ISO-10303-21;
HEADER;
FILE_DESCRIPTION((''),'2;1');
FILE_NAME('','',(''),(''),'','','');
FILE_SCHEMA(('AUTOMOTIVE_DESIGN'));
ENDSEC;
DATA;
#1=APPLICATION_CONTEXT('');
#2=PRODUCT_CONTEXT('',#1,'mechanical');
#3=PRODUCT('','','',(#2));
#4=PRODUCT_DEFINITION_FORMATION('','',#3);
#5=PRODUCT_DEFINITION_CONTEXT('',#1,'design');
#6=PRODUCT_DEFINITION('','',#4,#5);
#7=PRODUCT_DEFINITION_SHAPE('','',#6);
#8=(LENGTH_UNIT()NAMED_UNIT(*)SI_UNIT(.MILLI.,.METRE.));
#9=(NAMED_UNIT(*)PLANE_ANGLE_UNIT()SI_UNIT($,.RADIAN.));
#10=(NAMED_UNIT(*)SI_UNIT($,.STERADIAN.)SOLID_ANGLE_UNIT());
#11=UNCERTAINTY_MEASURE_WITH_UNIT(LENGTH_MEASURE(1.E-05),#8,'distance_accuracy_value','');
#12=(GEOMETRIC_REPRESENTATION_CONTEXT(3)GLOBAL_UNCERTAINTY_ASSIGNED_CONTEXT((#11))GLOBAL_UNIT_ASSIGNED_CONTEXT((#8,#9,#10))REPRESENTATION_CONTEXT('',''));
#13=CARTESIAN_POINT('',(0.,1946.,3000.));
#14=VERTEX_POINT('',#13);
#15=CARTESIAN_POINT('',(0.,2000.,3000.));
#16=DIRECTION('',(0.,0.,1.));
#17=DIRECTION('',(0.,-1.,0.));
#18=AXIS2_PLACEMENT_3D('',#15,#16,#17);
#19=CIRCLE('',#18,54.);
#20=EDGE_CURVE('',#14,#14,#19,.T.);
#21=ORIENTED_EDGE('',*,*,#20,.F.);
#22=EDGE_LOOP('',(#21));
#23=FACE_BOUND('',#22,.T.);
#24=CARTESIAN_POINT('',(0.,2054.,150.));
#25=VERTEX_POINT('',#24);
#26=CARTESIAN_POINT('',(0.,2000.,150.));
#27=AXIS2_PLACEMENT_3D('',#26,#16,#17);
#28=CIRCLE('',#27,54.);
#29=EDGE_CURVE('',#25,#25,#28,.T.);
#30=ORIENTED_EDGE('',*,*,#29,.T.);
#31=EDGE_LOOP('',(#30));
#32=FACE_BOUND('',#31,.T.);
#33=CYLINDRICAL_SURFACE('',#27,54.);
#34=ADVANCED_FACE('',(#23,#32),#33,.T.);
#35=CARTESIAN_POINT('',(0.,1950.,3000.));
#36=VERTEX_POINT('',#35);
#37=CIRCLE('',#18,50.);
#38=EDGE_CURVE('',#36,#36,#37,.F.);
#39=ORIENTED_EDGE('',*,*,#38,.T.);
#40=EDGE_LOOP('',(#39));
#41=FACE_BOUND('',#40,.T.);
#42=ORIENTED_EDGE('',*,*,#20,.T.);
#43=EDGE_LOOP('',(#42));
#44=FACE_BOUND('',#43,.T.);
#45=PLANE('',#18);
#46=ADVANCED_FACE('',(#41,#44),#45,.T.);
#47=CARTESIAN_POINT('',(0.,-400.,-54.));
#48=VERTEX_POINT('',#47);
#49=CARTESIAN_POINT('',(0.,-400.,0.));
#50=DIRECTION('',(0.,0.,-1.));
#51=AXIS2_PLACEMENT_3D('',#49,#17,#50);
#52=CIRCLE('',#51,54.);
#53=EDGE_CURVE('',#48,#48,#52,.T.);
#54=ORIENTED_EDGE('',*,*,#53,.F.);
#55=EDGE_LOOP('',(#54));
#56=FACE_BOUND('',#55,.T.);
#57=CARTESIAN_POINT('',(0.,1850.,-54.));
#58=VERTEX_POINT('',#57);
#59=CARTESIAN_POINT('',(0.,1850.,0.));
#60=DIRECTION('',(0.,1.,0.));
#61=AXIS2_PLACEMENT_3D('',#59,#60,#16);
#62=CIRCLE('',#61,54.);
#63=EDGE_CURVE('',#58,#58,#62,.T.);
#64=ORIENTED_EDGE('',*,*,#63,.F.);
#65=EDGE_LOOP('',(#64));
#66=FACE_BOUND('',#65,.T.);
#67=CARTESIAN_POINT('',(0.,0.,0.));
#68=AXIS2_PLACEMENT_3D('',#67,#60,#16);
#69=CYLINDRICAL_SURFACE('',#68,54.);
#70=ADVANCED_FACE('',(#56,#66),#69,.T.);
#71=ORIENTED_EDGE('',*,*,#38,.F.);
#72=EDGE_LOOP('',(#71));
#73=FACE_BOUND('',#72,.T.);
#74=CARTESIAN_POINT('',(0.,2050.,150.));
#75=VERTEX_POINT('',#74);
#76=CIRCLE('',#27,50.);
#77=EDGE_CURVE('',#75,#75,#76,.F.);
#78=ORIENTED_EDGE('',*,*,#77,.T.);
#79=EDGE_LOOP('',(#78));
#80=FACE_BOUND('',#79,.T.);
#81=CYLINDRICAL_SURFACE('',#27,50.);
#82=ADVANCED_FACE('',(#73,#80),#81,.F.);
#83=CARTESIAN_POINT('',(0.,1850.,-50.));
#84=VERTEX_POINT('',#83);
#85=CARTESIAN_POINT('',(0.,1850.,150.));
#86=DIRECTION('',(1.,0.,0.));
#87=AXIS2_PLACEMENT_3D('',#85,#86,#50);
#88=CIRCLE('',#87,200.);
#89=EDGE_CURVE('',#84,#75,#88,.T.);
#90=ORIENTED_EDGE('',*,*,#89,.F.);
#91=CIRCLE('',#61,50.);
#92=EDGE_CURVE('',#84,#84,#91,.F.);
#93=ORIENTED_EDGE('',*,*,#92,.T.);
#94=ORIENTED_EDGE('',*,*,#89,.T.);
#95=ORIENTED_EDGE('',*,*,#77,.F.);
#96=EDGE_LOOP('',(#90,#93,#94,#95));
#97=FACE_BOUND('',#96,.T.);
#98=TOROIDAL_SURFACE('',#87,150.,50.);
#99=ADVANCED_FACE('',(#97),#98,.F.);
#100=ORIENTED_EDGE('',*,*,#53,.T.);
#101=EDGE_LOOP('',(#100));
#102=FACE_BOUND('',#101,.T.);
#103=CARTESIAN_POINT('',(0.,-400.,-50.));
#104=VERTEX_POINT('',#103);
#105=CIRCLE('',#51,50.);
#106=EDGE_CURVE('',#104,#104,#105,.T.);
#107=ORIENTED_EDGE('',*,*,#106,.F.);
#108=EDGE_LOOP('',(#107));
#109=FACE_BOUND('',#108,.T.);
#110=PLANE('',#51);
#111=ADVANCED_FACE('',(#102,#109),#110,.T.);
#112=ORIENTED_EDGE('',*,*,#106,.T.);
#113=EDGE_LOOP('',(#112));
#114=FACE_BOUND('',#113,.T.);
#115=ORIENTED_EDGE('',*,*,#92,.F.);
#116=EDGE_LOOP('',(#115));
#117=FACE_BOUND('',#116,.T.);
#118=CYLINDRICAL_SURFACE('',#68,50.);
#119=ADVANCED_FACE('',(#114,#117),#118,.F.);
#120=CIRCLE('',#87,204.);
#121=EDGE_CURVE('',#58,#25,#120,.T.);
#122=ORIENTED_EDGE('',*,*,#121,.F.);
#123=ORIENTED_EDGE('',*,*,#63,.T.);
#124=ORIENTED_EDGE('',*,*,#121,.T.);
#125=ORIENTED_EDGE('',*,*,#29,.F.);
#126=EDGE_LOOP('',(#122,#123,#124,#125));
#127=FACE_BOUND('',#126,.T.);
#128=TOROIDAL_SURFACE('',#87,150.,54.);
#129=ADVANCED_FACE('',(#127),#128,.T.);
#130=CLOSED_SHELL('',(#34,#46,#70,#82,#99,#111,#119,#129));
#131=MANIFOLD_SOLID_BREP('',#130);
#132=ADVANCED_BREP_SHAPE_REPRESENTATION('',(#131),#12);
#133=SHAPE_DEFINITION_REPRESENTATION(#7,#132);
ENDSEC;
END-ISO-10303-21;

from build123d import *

# Parameters (mm, degrees)
SKETCH2_R           = 54
SKETCH2_R_2         = 50
SKETCH3_R           = 54
SKETCH3_R_2         = 50
BOSS_EXTRUDE1_DEPTH = 400


with BuildPart() as part:
    # Sweep1: sweep along a path in Sketch1
    with BuildLine(Plane(origin=(0, 0, 0), x_dir=(0, 0, -1), z_dir=(1, 0, 0))) as sweep1_path:
        Line((0, 0), (0, 1850))
        ThreePointArc((0, 1850), (-43.933982822, 1956.066017178), (-150, 2000))
        Line((-150, 2000), (-3000, 2000))
    # Sketch2 → Sweep1 (sweep)
    with BuildSketch(Plane(origin=(0, 0, 0), x_dir=(1, 0, 0), z_dir=(0, 1, 0))):
        Circle(SKETCH2_R)
        Circle(SKETCH2_R_2, mode=Mode.SUBTRACT)
    sweep(path=sweep1_path.line)

    # Sketch3 → Boss-Extrude1 (add)
    with BuildSketch(Plane.XZ):
        Circle(SKETCH3_R)
        Circle(SKETCH3_R_2, mode=Mode.SUBTRACT)
    extrude(amount=BOSS_EXTRUDE1_DEPTH)


solid = part.part
